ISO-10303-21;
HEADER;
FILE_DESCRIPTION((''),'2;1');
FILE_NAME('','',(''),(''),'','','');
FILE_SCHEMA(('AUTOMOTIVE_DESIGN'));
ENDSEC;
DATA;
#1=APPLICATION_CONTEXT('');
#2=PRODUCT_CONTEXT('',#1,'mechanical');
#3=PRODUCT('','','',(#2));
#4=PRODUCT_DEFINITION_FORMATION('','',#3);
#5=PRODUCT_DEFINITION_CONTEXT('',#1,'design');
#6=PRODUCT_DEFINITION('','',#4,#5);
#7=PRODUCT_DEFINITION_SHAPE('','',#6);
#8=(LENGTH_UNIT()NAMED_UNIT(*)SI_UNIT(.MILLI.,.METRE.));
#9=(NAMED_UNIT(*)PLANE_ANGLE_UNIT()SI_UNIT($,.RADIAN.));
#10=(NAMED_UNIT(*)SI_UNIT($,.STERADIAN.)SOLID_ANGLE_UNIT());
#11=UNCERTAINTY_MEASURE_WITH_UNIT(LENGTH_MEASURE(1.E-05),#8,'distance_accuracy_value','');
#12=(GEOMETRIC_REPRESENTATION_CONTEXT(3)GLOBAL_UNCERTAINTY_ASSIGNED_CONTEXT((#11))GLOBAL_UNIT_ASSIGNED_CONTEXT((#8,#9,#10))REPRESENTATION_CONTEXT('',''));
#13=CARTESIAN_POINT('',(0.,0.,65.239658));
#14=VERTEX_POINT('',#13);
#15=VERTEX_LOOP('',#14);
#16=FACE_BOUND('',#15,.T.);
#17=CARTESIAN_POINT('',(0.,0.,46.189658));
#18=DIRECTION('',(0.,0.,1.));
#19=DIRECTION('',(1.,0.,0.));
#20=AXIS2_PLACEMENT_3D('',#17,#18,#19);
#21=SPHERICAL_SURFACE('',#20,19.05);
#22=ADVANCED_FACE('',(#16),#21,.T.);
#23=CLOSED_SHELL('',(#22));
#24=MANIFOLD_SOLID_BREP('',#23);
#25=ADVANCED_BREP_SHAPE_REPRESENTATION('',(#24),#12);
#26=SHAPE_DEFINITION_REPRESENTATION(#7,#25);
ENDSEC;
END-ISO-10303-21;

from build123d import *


# Not quite as in the source:
# - the program builds the solid bodies; features that only make, move or delete a surface that nothing else refers to are left out


with BuildPart() as f1:
    # F0 (on Front) → F1 (revolve)
    with BuildSketch(Plane.XZ):
        with BuildLine():
            Line((0, 65.2396578347), (0, 27.1396578347))
            ThreePointArc((0, 27.1396578347), (19.05, 46.1896578347), (0, 65.2396578347))
        make_face()
    revolve(axis=Axis((0, 0, 46.1896578347), (0, 0, 1)))


solid = f1.part
